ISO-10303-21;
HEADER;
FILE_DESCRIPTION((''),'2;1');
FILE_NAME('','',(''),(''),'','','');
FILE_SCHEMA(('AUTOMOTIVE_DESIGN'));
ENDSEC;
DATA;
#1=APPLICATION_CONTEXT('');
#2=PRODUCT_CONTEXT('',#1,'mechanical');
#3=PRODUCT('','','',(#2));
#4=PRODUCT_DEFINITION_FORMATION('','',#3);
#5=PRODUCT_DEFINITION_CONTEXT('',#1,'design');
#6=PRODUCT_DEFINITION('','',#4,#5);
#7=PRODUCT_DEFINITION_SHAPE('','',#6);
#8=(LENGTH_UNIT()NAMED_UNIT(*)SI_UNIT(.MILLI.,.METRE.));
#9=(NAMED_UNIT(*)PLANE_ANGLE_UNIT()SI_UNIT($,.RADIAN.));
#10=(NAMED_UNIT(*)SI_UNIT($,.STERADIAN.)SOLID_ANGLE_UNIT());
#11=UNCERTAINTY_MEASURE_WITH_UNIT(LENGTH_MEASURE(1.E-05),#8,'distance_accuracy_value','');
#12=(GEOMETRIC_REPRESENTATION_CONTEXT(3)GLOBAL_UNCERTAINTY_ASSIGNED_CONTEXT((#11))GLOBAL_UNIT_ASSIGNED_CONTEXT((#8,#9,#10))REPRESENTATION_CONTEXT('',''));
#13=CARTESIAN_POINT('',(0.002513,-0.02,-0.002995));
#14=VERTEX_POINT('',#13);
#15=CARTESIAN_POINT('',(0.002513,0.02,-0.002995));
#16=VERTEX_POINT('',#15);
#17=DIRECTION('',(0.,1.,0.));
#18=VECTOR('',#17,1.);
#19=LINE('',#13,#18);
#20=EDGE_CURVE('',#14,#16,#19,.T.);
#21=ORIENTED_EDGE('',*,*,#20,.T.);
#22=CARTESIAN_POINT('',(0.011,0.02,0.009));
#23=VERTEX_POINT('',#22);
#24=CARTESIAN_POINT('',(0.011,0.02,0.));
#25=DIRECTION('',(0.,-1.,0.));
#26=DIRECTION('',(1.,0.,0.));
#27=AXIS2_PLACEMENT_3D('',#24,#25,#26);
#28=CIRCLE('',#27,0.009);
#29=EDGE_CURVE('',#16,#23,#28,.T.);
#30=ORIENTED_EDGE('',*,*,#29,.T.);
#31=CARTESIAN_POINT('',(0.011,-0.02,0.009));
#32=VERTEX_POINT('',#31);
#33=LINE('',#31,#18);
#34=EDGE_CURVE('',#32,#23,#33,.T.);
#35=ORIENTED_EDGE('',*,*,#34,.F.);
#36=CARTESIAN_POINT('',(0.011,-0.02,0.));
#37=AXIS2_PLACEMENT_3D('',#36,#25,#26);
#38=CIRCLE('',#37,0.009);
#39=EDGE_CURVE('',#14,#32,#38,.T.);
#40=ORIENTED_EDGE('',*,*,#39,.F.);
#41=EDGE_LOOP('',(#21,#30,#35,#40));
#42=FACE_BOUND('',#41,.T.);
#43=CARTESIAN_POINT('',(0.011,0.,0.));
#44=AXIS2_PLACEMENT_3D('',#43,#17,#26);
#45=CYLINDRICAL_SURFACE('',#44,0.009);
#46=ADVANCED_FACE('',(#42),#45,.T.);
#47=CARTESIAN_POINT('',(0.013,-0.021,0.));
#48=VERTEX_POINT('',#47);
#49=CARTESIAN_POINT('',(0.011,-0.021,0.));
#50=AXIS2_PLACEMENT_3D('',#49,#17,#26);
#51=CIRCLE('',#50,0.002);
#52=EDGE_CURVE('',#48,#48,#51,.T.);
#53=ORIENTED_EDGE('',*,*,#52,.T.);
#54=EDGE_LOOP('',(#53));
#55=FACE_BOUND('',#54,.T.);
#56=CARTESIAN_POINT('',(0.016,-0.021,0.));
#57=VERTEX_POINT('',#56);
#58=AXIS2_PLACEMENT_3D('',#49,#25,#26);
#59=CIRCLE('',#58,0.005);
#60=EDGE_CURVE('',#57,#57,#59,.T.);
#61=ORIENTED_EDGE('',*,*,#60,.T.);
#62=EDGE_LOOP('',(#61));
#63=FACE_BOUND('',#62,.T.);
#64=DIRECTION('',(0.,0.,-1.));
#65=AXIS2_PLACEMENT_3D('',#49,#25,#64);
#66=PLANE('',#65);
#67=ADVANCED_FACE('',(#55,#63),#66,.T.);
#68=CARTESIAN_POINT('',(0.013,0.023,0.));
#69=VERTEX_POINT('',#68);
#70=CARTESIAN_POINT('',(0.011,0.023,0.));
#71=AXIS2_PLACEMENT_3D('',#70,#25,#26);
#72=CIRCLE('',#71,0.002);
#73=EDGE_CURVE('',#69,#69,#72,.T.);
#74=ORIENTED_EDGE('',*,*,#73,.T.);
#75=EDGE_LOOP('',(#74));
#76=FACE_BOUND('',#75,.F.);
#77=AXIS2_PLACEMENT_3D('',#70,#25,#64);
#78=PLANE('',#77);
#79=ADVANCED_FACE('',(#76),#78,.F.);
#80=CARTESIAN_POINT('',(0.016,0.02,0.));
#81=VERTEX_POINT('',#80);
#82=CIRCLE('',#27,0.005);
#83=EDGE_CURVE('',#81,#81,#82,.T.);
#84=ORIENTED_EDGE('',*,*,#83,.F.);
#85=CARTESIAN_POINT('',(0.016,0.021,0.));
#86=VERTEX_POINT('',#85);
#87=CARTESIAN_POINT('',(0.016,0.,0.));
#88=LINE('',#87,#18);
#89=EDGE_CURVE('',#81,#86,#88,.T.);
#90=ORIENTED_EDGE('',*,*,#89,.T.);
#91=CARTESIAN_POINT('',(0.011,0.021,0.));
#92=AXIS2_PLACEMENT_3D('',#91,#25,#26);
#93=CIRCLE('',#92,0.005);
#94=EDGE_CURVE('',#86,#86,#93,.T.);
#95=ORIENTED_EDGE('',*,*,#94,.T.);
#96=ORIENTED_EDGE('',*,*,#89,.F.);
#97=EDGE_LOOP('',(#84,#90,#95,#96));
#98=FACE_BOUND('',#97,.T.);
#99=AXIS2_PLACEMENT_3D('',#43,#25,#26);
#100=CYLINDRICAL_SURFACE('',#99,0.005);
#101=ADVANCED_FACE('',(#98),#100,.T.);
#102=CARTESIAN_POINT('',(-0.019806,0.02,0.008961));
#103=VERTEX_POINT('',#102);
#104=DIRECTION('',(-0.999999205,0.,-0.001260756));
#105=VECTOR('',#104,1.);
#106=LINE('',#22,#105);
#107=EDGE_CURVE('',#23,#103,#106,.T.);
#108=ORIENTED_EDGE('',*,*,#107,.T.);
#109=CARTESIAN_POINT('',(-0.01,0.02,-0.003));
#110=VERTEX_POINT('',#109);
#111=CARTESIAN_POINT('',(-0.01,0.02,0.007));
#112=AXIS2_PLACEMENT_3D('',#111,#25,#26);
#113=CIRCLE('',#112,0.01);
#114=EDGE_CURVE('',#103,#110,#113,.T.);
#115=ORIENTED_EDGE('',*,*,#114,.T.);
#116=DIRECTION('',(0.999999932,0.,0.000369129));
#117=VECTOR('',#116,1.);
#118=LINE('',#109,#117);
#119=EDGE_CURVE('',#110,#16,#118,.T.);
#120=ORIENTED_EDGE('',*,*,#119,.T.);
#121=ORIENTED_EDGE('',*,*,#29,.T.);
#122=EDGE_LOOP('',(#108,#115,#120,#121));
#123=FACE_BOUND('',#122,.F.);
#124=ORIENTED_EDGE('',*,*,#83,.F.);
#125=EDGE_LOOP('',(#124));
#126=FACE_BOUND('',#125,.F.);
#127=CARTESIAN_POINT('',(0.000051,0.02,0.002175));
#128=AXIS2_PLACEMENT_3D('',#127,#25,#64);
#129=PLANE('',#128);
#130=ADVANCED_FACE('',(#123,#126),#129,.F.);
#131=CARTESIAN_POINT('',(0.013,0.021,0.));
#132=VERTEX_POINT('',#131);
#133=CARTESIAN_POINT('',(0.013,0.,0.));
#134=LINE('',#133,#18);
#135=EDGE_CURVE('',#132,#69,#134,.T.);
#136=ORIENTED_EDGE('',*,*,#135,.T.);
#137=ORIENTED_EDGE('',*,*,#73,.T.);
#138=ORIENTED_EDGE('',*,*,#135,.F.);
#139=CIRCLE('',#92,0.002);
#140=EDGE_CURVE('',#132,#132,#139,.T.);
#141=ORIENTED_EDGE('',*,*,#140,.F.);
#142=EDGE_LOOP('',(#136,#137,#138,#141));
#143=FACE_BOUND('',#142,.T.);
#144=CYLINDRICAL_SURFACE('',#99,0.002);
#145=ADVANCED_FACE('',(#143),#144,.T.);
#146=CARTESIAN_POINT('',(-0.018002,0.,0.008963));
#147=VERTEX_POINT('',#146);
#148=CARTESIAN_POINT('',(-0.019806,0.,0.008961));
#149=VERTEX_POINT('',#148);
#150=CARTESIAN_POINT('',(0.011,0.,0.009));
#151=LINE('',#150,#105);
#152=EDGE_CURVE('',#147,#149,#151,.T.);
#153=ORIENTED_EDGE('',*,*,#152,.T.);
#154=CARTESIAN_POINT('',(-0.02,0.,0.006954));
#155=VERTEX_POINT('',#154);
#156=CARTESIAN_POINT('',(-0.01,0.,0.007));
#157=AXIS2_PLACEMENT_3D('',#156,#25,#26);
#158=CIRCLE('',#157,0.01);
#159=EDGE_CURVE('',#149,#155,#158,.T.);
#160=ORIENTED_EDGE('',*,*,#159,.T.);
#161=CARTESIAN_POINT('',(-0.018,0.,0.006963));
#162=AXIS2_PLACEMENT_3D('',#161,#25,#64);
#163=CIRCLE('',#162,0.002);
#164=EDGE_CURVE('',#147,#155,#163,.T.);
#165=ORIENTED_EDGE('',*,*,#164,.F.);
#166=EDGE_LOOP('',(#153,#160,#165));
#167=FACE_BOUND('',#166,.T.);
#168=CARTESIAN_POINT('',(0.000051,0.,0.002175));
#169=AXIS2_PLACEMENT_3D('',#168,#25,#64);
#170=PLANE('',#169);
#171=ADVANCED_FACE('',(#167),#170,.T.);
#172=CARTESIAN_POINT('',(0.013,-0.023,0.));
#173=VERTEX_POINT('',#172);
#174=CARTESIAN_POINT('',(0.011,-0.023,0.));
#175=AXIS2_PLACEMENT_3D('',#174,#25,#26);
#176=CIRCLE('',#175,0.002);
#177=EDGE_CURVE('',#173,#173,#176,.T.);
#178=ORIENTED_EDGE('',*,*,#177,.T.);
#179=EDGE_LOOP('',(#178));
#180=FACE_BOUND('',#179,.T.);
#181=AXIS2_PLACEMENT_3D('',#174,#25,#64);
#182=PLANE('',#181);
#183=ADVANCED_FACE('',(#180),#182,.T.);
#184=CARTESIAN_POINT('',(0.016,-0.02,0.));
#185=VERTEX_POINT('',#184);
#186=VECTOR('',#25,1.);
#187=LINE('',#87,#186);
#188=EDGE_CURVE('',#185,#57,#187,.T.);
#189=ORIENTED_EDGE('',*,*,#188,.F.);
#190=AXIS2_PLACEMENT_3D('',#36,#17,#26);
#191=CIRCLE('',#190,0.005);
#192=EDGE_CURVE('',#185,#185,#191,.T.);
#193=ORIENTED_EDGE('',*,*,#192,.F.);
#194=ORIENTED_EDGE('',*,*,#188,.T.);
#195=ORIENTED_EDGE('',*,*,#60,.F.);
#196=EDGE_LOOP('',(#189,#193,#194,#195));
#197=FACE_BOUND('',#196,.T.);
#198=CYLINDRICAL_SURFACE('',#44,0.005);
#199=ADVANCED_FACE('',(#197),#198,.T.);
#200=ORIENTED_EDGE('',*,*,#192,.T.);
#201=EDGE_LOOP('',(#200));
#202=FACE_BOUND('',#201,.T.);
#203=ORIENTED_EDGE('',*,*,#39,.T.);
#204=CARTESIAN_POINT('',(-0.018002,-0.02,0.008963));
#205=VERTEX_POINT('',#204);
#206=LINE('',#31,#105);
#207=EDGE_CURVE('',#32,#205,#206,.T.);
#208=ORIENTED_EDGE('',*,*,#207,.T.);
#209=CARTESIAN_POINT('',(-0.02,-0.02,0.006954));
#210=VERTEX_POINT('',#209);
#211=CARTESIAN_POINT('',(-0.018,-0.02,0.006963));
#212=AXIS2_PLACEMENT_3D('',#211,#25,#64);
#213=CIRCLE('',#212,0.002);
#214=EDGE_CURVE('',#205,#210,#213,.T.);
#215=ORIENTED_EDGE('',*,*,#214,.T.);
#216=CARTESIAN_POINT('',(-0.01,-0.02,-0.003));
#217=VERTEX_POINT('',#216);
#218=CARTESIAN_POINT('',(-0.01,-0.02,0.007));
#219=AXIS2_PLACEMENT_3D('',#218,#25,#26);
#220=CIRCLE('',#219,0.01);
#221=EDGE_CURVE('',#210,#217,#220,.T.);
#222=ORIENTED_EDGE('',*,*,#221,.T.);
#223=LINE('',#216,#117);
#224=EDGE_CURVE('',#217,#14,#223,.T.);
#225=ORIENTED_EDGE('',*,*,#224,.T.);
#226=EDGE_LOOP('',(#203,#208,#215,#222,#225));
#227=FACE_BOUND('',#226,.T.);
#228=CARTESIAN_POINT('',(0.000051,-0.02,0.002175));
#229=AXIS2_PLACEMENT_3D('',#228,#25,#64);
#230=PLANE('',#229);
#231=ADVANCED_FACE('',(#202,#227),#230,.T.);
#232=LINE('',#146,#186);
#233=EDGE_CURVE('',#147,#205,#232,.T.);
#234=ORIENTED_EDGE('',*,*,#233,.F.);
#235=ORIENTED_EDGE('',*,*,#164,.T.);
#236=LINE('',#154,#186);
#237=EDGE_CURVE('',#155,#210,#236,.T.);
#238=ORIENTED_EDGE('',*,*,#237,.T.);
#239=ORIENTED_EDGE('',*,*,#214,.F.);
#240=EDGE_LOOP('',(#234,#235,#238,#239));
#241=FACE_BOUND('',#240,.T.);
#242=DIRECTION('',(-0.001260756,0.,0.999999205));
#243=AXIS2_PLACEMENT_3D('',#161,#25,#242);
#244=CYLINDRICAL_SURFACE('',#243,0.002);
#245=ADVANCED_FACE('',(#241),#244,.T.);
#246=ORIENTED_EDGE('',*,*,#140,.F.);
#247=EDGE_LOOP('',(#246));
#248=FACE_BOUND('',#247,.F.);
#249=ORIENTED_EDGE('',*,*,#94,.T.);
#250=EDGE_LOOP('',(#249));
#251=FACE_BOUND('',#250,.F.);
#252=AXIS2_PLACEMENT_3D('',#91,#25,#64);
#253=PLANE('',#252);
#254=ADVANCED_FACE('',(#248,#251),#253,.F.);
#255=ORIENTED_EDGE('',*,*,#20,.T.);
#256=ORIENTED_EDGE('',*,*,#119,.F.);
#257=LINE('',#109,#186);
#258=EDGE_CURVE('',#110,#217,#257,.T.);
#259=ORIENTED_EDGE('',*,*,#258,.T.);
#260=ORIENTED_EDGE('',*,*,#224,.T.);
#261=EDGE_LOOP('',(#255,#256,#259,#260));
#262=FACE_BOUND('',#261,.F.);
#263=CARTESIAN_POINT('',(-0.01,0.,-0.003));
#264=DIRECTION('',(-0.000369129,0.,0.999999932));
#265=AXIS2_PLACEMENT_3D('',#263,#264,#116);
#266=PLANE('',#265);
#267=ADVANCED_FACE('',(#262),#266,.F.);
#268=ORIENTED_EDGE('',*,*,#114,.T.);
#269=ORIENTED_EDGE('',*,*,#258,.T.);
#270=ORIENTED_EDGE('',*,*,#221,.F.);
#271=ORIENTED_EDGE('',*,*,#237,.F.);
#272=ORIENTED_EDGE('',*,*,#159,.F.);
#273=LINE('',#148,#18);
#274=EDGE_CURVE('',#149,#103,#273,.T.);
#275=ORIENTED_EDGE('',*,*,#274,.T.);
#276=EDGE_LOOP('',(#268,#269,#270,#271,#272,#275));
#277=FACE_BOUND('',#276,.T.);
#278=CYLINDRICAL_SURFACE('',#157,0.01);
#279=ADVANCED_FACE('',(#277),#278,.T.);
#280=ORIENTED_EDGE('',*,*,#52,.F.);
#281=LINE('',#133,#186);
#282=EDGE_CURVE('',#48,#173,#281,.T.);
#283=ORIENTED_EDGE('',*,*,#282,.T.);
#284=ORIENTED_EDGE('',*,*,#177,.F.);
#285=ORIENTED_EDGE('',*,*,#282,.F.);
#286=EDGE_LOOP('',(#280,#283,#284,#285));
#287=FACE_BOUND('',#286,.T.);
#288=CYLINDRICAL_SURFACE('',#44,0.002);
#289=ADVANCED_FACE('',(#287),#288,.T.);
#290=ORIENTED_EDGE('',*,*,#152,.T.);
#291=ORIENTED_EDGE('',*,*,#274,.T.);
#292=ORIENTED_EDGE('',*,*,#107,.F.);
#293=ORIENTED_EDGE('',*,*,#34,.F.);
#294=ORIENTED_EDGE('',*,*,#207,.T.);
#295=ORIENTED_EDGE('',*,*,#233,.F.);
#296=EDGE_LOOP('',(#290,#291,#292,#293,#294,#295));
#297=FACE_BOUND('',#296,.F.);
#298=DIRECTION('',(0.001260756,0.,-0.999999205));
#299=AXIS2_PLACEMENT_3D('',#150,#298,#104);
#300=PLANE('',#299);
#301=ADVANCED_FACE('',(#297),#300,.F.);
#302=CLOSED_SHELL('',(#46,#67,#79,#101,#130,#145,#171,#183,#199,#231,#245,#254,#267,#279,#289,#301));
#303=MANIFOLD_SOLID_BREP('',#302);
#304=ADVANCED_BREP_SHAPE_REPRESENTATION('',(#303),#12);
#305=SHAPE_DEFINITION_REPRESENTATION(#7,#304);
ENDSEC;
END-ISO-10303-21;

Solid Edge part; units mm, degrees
sketch "Sketch1" plane through (0, 0, 0) normal (0, -1, 0) x (1, 0, 0)
  line L0 (0.011, 0.009) -> (-0.02, 0.009)
  line L1 (-0.02, 0.009) -> (-0.02, 0.007) construction
  line L2 (-0.01, -0.003) -> (0.0025, -0.003)
  arc A0 (0.0025, -0.003) -> (0.011, 0.009) centre (0.011, 0) ccw
  arc A1 (-0.02, 0.007) -> (-0.01, -0.003) centre (-0.01, 0.007) ccw
  dimension "D1" = 0.011
  dimension "D2" = 0.02
extrude "Protrusion1" add sketch "Sketch1" along normal mid plane 0.04
fillet "Verrundung_1" radius 0.002 1 edges at (-0.02, 0, 0.009)
sketch "Sketch2" plane through (0, 0, 0) normal (0, -1, 0) x (1, 0, 0)
  circle A0 centre (0.011, 0) radius 0.005
  dimension "D1" = 0.01
extrude "Ausprägung_2" add sketch "Sketch2" along normal mid plane 0.042
sketch "Sketch3" plane through (0, 0, 0) normal (0, -1, 0) x (1, 0, 0)
  circle A0 centre (0.011, 0) radius 0.002
  dimension "D1" = 0.004
extrude "Ausprägung_3" add sketch "Sketch3" along normal mid plane 0.046
